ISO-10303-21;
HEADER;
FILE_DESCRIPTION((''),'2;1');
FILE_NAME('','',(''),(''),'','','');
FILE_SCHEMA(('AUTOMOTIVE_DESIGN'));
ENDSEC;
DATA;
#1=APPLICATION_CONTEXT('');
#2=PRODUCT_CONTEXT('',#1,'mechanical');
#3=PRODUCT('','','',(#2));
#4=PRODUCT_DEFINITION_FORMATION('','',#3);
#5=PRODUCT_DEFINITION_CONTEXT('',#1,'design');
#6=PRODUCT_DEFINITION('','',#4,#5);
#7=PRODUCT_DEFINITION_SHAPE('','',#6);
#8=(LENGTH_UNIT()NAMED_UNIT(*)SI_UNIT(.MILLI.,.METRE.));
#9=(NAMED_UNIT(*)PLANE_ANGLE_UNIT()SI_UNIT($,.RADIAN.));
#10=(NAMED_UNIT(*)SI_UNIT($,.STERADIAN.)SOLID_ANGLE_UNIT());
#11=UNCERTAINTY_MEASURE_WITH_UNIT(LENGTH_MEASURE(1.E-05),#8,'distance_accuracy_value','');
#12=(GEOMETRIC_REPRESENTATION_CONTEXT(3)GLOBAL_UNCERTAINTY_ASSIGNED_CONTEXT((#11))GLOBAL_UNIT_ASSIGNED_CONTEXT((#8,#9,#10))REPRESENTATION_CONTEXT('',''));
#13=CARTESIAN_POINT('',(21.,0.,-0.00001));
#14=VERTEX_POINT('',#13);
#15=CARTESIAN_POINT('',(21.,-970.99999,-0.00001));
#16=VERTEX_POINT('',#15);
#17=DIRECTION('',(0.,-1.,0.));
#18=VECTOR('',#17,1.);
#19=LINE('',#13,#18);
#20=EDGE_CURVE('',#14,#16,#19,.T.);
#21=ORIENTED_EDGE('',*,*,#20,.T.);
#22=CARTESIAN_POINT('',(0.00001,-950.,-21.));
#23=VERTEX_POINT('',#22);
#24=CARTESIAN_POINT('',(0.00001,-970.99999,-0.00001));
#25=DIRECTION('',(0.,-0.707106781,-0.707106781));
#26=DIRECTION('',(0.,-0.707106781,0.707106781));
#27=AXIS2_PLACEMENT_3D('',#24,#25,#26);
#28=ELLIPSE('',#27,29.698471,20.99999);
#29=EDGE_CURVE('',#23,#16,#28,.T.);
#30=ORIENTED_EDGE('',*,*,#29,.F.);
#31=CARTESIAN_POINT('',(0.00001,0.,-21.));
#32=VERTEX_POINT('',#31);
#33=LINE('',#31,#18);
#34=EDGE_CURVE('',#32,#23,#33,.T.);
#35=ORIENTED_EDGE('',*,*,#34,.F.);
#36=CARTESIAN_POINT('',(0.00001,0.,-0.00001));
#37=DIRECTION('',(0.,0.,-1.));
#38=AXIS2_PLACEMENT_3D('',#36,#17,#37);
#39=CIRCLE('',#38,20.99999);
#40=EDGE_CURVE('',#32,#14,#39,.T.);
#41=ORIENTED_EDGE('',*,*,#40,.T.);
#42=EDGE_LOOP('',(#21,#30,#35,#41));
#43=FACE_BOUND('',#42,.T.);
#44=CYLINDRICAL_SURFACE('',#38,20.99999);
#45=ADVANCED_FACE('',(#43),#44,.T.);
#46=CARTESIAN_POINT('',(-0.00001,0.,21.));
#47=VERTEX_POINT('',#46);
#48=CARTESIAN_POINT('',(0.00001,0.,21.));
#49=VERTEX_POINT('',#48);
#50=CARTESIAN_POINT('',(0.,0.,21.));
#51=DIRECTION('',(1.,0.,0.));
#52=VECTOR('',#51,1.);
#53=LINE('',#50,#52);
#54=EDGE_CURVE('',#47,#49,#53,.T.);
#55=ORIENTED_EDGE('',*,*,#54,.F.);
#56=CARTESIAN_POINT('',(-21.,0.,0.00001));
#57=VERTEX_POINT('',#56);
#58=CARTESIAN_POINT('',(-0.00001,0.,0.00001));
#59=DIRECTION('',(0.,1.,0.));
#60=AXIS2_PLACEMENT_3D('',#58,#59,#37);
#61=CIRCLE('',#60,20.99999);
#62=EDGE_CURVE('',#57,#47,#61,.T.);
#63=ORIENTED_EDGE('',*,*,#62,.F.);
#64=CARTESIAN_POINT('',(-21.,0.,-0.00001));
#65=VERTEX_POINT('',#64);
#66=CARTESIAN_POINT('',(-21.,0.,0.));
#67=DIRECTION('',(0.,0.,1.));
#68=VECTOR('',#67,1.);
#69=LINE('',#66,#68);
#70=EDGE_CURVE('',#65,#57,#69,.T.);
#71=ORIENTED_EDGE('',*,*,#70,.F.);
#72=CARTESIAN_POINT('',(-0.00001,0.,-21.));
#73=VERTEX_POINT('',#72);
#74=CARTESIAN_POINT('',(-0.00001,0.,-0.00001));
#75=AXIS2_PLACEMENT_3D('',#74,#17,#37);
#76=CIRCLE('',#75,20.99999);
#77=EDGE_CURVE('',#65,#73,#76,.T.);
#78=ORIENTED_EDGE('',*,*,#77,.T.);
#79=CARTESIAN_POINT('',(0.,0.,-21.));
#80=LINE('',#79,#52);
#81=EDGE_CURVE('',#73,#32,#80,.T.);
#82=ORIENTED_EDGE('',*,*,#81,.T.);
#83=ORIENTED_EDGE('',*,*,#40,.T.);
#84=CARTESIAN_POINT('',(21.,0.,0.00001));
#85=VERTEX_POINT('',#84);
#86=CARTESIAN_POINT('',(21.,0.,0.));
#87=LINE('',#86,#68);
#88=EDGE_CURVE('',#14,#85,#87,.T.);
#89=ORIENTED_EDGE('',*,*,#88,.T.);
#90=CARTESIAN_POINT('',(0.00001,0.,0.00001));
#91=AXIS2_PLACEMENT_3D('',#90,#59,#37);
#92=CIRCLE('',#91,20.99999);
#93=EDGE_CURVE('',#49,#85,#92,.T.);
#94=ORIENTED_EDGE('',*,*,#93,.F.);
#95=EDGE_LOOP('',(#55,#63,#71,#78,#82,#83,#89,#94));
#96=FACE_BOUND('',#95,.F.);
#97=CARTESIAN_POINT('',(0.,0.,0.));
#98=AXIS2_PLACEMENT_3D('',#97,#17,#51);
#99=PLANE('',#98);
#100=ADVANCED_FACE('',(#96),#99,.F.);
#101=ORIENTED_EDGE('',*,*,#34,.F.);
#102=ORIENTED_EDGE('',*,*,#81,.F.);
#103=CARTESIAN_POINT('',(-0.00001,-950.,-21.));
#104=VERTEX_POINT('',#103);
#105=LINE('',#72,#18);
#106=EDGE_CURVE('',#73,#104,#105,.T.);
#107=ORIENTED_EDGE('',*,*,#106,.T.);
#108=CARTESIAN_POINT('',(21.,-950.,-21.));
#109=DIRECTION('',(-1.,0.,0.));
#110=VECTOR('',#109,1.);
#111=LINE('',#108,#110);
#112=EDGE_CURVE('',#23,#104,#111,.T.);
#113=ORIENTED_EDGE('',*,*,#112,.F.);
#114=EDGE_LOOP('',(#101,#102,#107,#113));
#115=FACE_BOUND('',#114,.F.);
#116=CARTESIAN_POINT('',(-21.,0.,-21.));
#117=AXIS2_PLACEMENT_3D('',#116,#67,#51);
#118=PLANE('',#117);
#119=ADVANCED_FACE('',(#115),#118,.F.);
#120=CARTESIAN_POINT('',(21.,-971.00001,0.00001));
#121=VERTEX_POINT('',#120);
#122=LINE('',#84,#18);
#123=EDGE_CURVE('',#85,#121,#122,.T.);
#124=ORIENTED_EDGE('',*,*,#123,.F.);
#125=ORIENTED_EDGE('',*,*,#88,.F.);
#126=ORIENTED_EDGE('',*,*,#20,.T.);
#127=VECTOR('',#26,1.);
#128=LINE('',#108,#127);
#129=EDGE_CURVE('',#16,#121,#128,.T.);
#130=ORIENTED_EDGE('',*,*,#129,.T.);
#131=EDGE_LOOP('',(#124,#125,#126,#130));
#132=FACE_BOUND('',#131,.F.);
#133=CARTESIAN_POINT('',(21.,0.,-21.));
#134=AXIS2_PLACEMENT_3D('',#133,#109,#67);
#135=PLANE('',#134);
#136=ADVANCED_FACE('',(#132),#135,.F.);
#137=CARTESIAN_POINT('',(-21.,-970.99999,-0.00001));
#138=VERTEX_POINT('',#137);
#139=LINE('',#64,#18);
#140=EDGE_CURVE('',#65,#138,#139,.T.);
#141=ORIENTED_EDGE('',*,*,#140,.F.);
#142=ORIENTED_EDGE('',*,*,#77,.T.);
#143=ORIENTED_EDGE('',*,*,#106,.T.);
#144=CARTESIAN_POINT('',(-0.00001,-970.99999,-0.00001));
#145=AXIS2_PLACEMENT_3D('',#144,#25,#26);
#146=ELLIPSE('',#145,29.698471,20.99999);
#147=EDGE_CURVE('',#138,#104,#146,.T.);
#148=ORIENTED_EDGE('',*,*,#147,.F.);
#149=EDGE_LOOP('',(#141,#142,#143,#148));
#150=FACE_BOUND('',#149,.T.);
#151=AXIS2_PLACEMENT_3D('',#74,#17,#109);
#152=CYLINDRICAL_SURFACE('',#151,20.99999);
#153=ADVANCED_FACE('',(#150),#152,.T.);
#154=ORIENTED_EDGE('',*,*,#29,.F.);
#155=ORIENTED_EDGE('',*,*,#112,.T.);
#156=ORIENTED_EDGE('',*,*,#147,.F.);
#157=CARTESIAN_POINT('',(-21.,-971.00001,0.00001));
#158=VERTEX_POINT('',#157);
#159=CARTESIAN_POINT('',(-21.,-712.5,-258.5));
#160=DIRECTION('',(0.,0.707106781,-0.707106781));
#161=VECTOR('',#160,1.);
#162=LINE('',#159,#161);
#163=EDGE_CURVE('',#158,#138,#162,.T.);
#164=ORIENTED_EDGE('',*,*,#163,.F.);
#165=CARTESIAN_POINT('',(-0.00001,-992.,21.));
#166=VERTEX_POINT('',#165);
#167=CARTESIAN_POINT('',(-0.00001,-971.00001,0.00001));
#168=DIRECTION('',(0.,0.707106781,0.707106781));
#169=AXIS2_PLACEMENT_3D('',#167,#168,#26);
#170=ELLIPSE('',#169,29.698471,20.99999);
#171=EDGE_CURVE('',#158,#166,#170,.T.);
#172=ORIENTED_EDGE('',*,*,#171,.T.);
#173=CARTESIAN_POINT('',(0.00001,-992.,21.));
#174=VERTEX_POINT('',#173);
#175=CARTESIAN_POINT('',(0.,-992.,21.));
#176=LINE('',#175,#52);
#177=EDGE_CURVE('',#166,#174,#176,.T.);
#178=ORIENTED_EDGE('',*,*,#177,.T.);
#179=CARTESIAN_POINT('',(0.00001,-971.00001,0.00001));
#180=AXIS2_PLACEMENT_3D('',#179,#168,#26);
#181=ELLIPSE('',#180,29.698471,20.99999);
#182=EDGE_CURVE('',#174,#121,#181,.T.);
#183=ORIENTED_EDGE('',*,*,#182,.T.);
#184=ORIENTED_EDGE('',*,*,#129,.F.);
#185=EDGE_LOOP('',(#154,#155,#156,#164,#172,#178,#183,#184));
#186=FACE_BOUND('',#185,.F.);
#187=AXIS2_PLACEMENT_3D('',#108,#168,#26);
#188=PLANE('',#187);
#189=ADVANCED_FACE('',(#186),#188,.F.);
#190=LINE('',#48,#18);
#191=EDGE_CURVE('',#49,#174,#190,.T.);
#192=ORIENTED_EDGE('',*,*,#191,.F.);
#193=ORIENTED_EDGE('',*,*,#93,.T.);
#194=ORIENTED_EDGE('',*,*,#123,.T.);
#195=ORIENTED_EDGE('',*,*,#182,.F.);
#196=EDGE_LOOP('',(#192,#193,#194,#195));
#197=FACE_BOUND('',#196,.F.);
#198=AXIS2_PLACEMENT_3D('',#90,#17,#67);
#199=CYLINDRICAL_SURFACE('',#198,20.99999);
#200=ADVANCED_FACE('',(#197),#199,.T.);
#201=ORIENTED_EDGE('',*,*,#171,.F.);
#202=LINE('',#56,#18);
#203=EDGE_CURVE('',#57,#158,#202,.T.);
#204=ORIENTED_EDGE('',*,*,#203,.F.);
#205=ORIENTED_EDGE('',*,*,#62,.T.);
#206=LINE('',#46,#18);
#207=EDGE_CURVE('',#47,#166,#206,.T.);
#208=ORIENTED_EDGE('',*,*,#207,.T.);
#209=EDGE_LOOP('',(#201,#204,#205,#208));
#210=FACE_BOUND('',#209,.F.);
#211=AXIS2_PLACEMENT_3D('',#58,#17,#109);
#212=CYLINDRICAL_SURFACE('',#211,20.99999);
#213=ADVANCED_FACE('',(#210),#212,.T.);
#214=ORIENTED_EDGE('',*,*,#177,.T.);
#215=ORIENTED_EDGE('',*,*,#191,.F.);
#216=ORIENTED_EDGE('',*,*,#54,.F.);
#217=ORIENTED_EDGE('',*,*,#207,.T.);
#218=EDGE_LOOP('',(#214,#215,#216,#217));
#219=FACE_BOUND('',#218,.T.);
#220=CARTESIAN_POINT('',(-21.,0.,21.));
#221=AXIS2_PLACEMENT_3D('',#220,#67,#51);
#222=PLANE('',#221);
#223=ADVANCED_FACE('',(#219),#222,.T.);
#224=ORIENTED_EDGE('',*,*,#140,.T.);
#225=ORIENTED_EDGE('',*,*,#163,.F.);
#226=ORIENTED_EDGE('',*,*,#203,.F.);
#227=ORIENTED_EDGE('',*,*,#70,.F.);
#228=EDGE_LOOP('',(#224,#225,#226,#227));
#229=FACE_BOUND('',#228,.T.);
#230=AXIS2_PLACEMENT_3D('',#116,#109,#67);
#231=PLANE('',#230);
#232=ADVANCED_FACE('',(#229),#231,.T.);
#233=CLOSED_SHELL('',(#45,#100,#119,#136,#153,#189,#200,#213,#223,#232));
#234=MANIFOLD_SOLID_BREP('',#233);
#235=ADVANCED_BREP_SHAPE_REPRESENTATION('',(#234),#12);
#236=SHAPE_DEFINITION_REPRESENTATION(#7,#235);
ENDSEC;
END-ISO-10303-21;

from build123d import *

# Parameters (mm, degrees)
F0_W     = 42
F0_H     = 42
F1_DEPTH = 992
F3_DEPTH = 100
F4_R     = 20.99999


# Not quite as in the source:
# - a fillet or chamfer is up to 0.001 mm smaller than in the source, because OpenCascade refuses the exact size


with BuildPart() as f1:
    # F0 (on Front) → F1 (new body)
    with BuildSketch(Plane.XZ):
        Rectangle(F0_W, F0_H)
    extrude(amount=F1_DEPTH)

    # F2 (on face) → F3 (cut)
    with BuildSketch(Plane.YZ.offset(21)):
        Polygon((-950, -21), (-992, 21), (-992, -21), align=None)
    extrude(amount=-F3_DEPTH, mode=Mode.SUBTRACT)

    # F4 (radius 21 in the source; OpenCascade refuses exactly that, so slightly less here)
    f4_edges = [f1.edges().sort_by_distance(p)[0] for p in [
        (-21, -496, 21),
        (-21, -475, -21),
        (21, -496, 21),
        (21, -475, -21),
    ]]
    fillet(f4_edges, radius=F4_R)


solid = f1.part
